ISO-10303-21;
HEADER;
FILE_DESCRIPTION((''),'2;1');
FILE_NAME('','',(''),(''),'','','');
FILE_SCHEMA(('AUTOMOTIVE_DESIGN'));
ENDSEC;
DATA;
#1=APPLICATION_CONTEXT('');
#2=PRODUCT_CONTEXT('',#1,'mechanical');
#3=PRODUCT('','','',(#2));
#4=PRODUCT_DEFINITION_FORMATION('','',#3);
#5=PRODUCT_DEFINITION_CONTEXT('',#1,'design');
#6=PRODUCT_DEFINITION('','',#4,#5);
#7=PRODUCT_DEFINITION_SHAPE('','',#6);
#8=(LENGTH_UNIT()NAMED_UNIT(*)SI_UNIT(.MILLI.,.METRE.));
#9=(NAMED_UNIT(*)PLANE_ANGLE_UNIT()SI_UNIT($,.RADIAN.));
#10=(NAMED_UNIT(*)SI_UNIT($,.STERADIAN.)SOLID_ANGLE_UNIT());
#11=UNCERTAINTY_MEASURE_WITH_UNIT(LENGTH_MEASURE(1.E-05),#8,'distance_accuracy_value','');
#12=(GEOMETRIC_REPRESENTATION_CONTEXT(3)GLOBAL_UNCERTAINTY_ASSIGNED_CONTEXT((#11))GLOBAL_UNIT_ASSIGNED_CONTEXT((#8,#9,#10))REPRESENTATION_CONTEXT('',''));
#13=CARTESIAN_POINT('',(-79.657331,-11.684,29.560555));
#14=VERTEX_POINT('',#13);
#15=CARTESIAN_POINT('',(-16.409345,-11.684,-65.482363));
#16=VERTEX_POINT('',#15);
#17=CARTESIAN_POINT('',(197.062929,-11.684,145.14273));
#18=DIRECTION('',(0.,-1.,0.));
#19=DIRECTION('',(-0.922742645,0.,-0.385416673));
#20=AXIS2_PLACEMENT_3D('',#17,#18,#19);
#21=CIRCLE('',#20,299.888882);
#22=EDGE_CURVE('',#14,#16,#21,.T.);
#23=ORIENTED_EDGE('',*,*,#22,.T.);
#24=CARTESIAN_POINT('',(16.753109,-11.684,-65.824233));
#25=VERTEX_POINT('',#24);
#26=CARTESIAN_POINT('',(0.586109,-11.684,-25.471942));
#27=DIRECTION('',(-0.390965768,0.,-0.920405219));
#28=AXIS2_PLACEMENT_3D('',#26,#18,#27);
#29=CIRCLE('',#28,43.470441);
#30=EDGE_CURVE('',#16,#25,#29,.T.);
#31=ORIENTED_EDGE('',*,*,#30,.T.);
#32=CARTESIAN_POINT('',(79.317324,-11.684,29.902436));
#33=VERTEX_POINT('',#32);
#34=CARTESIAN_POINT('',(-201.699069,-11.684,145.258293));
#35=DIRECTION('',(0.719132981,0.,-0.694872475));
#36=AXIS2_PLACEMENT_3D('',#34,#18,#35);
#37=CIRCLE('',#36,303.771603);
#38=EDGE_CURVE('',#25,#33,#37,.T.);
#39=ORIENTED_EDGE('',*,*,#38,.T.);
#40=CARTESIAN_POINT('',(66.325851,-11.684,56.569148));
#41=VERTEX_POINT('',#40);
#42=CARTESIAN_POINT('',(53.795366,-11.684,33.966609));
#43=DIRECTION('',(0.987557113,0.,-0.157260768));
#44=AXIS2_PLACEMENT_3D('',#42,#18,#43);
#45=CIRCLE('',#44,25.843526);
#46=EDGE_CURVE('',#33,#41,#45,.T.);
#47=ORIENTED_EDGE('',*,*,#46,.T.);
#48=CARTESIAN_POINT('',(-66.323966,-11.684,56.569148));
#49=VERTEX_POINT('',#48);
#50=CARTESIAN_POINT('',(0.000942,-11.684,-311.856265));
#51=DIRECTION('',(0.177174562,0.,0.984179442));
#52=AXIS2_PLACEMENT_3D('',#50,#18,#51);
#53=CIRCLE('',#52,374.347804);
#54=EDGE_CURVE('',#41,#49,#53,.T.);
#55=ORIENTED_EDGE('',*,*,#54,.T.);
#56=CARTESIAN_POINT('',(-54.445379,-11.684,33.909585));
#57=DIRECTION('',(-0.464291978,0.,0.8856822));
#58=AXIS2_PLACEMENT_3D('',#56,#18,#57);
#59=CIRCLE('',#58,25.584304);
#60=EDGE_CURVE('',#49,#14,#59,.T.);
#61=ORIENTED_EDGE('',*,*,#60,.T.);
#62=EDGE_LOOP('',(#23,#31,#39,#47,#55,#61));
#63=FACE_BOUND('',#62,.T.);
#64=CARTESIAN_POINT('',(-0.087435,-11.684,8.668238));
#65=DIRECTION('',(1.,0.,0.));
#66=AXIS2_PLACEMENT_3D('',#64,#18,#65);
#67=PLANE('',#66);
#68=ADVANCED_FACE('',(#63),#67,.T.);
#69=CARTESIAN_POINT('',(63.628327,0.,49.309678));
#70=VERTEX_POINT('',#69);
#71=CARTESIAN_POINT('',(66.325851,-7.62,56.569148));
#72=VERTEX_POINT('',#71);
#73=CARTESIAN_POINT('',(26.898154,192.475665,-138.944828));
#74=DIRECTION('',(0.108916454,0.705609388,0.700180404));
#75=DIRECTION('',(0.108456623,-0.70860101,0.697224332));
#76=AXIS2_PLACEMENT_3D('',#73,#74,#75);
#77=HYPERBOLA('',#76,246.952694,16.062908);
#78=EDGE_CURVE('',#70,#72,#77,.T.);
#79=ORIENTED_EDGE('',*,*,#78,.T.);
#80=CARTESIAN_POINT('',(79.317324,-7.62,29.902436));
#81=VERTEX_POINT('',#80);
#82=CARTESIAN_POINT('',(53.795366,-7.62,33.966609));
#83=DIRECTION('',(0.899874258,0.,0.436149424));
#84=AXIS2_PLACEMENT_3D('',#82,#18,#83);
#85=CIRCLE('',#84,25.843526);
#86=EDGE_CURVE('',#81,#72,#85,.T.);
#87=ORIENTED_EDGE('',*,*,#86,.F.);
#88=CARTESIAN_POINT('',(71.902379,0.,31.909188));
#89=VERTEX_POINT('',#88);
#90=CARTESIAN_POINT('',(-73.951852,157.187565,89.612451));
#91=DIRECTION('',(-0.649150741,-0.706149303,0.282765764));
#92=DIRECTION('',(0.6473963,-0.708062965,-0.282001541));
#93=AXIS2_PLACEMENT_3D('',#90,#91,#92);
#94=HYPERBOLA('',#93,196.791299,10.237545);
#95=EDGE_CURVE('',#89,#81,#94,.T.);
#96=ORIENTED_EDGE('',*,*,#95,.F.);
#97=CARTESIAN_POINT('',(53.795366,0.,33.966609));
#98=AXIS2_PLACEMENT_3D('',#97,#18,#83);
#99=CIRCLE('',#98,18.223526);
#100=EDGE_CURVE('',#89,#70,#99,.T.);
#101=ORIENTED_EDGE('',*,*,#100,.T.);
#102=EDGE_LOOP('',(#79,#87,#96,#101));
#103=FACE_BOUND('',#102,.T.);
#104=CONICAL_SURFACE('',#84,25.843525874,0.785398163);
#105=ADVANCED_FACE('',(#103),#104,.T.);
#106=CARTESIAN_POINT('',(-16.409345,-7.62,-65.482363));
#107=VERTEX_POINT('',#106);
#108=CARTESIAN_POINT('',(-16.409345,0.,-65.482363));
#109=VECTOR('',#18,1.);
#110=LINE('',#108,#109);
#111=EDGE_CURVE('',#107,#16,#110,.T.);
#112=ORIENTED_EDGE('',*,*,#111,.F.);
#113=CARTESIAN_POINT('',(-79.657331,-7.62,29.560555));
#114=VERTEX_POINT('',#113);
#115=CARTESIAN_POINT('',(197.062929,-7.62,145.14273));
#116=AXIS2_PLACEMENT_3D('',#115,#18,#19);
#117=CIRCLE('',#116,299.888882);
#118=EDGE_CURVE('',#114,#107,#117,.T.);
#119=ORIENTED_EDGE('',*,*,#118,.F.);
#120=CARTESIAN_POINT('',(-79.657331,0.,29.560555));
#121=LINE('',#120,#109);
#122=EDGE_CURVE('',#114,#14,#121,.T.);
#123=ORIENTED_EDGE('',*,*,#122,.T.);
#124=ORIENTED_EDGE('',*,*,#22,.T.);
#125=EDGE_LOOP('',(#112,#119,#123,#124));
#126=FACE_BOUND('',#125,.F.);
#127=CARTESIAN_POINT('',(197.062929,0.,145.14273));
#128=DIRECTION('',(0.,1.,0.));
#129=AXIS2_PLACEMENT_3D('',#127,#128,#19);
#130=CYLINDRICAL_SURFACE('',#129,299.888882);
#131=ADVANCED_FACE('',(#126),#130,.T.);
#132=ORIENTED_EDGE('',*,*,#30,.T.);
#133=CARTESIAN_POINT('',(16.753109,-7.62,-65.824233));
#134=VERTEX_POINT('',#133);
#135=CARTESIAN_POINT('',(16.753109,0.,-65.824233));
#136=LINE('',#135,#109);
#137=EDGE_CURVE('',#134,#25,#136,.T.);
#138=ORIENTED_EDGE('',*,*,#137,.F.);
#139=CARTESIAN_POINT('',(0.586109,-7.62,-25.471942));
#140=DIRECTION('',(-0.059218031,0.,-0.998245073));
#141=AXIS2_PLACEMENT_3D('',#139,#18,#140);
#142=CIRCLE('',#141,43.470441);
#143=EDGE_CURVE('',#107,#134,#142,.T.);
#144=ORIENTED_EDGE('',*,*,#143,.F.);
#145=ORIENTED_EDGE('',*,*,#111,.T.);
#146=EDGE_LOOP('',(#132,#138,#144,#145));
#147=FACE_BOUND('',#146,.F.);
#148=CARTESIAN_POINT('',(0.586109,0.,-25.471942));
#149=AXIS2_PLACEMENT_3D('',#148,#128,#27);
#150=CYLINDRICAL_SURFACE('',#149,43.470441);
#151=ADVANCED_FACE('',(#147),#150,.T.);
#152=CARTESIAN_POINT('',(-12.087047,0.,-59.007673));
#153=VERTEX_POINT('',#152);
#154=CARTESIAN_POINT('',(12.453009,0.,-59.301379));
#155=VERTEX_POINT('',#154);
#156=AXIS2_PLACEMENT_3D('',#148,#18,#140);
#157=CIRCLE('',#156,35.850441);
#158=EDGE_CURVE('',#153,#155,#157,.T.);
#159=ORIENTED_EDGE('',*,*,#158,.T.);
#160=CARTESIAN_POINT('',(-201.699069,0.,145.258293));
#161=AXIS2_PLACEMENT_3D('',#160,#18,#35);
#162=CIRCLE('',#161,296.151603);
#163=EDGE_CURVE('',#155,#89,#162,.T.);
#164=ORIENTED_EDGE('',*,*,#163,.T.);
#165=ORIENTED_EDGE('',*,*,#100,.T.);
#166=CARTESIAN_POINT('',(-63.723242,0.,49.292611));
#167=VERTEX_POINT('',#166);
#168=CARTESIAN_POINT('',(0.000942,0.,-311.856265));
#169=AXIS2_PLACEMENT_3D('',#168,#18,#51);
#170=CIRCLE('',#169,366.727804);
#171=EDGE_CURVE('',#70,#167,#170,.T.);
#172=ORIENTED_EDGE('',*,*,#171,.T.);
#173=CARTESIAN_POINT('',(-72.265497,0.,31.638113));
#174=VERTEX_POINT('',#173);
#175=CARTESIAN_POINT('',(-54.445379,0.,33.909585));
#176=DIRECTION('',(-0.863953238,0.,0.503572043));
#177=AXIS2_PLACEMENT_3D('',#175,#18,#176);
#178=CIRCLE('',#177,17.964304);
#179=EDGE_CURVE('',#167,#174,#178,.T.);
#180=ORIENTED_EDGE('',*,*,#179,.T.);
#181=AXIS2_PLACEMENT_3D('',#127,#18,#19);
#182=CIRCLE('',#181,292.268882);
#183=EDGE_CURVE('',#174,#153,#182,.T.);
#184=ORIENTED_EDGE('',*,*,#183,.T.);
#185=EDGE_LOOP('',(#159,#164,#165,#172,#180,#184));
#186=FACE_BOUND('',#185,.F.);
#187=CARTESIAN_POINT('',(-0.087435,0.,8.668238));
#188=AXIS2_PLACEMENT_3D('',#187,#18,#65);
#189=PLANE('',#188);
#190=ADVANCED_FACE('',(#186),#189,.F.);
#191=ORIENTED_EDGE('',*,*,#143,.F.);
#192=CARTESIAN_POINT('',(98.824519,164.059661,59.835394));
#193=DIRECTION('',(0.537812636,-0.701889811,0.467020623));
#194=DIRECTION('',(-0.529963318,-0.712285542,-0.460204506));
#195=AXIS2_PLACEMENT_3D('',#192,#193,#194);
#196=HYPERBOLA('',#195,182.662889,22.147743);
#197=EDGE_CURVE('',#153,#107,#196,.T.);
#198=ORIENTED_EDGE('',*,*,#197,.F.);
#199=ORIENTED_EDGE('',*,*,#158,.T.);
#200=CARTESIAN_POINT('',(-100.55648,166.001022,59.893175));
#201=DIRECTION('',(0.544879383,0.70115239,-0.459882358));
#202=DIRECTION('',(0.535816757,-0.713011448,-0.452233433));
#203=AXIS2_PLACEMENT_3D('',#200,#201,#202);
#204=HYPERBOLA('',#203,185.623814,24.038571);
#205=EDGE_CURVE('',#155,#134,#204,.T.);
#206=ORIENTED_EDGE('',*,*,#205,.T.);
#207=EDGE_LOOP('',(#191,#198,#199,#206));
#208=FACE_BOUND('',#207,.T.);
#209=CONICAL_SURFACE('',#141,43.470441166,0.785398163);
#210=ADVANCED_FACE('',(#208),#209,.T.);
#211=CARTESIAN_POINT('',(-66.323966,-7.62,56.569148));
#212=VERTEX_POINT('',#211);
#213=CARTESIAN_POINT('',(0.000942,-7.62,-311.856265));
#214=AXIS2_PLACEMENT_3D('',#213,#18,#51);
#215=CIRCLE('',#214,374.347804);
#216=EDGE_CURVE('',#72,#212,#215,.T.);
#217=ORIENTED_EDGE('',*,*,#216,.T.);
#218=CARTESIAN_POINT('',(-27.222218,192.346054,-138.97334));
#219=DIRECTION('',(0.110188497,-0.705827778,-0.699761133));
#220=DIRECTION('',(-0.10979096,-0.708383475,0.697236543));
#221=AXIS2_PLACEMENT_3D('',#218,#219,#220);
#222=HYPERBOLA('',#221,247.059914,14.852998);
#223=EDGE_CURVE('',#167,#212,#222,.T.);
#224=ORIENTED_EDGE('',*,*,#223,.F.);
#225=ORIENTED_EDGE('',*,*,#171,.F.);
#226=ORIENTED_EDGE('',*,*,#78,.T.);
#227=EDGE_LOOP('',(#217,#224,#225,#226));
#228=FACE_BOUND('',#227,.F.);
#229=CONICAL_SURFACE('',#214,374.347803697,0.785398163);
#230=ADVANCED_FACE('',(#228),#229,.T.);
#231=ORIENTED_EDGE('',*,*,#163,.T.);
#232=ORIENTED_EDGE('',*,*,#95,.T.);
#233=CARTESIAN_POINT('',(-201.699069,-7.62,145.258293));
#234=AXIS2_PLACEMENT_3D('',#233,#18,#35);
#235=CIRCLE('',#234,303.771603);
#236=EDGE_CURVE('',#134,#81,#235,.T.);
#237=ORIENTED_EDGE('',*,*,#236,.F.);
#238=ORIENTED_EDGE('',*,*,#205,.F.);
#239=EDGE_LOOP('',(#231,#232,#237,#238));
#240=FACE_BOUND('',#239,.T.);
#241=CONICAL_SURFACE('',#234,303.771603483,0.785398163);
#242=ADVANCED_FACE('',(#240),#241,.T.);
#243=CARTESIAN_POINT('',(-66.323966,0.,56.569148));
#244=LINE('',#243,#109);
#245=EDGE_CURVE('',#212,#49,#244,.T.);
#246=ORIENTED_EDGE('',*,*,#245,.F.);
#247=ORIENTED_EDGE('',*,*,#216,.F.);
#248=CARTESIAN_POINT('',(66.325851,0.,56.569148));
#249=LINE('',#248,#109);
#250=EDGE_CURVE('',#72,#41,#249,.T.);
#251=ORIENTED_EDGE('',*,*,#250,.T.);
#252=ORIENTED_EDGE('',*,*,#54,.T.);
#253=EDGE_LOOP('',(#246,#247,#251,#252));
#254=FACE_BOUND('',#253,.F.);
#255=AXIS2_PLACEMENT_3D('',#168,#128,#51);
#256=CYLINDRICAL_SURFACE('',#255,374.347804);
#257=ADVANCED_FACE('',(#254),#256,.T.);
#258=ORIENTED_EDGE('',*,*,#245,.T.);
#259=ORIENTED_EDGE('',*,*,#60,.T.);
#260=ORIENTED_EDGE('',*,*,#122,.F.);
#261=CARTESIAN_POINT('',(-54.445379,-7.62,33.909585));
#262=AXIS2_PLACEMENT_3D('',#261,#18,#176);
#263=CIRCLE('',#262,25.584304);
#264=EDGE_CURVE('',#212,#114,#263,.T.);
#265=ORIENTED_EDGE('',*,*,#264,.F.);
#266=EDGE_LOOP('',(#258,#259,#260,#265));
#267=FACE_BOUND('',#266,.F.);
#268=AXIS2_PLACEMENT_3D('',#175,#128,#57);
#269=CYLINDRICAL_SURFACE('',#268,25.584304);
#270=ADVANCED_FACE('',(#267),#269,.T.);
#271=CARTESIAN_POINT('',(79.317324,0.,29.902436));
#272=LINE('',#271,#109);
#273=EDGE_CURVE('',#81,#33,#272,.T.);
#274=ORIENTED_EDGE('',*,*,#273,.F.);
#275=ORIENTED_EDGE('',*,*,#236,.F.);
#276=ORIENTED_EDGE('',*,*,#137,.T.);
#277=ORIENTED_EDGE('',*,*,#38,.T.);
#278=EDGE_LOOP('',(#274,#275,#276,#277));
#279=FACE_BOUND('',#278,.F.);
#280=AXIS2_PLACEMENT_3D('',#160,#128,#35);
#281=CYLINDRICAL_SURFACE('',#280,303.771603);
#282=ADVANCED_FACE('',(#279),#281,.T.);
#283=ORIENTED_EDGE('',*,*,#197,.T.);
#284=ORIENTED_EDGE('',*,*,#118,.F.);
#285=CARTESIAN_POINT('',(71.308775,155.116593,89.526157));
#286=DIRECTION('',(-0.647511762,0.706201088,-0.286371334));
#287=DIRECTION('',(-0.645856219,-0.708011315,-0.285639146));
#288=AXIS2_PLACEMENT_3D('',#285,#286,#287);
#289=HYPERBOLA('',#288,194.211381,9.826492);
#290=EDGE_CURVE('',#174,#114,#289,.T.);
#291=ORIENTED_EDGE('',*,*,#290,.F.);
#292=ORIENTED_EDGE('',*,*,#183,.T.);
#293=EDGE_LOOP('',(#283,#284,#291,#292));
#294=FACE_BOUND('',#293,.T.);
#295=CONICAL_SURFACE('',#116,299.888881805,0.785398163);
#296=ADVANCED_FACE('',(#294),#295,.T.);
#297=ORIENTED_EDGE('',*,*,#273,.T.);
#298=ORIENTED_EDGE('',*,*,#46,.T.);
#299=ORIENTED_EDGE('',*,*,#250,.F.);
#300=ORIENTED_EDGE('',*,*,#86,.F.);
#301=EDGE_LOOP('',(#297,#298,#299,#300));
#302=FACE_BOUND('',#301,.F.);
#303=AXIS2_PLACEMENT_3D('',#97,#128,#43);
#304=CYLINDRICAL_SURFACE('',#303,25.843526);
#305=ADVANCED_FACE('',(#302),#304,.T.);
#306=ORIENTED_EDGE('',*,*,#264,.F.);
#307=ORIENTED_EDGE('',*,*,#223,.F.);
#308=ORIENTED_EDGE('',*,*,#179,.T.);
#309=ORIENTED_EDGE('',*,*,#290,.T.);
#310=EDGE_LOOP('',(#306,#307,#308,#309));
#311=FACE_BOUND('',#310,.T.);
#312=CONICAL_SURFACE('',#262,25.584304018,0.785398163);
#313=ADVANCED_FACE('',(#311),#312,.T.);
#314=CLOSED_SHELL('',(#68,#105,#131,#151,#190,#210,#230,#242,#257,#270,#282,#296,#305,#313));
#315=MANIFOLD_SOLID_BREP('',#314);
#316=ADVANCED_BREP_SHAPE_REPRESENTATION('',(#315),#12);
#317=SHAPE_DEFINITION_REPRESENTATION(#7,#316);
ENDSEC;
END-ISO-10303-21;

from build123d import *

# Parameters (mm, degrees)
F1_DEPTH   = 11.684
F2_C1_SIZE = 7.62
F2_C2_SIZE = 7.62
F2_C3_SIZE = 7.62
F2_C4_SIZE = 7.62
F2_C5_SIZE = 7.62
F2_C6_SIZE = 7.62


with BuildPart() as f1:
    # F0 (on Front) → F1 (new body)
    with BuildSketch(Plane.XZ):
        with BuildLine():
            ThreePointArc((79.3173238635, 29.9024358392), (77.0284346929, 45.2852812744), (66.3258507848, 56.569147855))
            ThreePointArc((66.3258507848, 56.569147855), (0.0009424984, 62.4915389193), (-66.3239657879, 56.569147855))
            ThreePointArc((-66.3239657879, 56.569147855), (-77.3864565896, 45.2349353182), (-79.657331109, 29.5605547726))
            ThreePointArc((-79.657331109, 29.5605547726), (-52.5977791189, -20.9983919929), (-16.4093449712, -65.4823631048))
            ThreePointArc((-16.4093449712, -65.4823631048), (0.1379989143, -68.9400736173), (16.753109172, -65.8242329955))
            ThreePointArc((16.753109172, -65.8242329955), (52.5805254234, -20.9315825649), (79.3173238635, 29.9024358392))
        make_face()
    extrude(amount=F1_DEPTH)

    # F2: chamfer of 7.62 on 6 edges, made by hand

    # F2_c1
    f2_c1_edges = [f1.edges().sort_by_distance(p)[0] for p in [
        (0.0009424984, 0, 62.4915389193),
    ]]
    chamfer(f2_c1_edges, length=F2_C1_SIZE)

    # F2_c2
    f2_c2_edges = [f1.edges().sort_by_distance(p)[0] for p in [
        (52.5805254234, 0, -20.9315825649),
    ]]
    chamfer(f2_c2_edges, length=F2_C2_SIZE)

    # F2_c3
    f2_c3_edges = [f1.edges().sort_by_distance(p)[0] for p in [
        (-52.5977791189, 0, -20.9983919929),
    ]]
    chamfer(f2_c3_edges, length=F2_C3_SIZE)

    # F2_c4
    f2_c4_edges = [f1.edges().sort_by_distance(p)[0] for p in [
        (0.4420771354, 0, -68.9421447146),
    ]]
    chamfer(f2_c4_edges, length=F2_C4_SIZE)

    # F2_c5
    f2_c5_edges = [f1.edges().sort_by_distance(p)[0] for p in [
        (-77.0468164212, 0, 45.8983976097),
    ]]
    chamfer(f2_c5_edges, length=F2_C5_SIZE)

    # F2_c6
    f2_c6_edges = [f1.edges().sort_by_distance(p)[0] for p in [
        (76.633600388, 0, 46.0621814234),
    ]]
    chamfer(f2_c6_edges, length=F2_C6_SIZE)


solid = f1.part
